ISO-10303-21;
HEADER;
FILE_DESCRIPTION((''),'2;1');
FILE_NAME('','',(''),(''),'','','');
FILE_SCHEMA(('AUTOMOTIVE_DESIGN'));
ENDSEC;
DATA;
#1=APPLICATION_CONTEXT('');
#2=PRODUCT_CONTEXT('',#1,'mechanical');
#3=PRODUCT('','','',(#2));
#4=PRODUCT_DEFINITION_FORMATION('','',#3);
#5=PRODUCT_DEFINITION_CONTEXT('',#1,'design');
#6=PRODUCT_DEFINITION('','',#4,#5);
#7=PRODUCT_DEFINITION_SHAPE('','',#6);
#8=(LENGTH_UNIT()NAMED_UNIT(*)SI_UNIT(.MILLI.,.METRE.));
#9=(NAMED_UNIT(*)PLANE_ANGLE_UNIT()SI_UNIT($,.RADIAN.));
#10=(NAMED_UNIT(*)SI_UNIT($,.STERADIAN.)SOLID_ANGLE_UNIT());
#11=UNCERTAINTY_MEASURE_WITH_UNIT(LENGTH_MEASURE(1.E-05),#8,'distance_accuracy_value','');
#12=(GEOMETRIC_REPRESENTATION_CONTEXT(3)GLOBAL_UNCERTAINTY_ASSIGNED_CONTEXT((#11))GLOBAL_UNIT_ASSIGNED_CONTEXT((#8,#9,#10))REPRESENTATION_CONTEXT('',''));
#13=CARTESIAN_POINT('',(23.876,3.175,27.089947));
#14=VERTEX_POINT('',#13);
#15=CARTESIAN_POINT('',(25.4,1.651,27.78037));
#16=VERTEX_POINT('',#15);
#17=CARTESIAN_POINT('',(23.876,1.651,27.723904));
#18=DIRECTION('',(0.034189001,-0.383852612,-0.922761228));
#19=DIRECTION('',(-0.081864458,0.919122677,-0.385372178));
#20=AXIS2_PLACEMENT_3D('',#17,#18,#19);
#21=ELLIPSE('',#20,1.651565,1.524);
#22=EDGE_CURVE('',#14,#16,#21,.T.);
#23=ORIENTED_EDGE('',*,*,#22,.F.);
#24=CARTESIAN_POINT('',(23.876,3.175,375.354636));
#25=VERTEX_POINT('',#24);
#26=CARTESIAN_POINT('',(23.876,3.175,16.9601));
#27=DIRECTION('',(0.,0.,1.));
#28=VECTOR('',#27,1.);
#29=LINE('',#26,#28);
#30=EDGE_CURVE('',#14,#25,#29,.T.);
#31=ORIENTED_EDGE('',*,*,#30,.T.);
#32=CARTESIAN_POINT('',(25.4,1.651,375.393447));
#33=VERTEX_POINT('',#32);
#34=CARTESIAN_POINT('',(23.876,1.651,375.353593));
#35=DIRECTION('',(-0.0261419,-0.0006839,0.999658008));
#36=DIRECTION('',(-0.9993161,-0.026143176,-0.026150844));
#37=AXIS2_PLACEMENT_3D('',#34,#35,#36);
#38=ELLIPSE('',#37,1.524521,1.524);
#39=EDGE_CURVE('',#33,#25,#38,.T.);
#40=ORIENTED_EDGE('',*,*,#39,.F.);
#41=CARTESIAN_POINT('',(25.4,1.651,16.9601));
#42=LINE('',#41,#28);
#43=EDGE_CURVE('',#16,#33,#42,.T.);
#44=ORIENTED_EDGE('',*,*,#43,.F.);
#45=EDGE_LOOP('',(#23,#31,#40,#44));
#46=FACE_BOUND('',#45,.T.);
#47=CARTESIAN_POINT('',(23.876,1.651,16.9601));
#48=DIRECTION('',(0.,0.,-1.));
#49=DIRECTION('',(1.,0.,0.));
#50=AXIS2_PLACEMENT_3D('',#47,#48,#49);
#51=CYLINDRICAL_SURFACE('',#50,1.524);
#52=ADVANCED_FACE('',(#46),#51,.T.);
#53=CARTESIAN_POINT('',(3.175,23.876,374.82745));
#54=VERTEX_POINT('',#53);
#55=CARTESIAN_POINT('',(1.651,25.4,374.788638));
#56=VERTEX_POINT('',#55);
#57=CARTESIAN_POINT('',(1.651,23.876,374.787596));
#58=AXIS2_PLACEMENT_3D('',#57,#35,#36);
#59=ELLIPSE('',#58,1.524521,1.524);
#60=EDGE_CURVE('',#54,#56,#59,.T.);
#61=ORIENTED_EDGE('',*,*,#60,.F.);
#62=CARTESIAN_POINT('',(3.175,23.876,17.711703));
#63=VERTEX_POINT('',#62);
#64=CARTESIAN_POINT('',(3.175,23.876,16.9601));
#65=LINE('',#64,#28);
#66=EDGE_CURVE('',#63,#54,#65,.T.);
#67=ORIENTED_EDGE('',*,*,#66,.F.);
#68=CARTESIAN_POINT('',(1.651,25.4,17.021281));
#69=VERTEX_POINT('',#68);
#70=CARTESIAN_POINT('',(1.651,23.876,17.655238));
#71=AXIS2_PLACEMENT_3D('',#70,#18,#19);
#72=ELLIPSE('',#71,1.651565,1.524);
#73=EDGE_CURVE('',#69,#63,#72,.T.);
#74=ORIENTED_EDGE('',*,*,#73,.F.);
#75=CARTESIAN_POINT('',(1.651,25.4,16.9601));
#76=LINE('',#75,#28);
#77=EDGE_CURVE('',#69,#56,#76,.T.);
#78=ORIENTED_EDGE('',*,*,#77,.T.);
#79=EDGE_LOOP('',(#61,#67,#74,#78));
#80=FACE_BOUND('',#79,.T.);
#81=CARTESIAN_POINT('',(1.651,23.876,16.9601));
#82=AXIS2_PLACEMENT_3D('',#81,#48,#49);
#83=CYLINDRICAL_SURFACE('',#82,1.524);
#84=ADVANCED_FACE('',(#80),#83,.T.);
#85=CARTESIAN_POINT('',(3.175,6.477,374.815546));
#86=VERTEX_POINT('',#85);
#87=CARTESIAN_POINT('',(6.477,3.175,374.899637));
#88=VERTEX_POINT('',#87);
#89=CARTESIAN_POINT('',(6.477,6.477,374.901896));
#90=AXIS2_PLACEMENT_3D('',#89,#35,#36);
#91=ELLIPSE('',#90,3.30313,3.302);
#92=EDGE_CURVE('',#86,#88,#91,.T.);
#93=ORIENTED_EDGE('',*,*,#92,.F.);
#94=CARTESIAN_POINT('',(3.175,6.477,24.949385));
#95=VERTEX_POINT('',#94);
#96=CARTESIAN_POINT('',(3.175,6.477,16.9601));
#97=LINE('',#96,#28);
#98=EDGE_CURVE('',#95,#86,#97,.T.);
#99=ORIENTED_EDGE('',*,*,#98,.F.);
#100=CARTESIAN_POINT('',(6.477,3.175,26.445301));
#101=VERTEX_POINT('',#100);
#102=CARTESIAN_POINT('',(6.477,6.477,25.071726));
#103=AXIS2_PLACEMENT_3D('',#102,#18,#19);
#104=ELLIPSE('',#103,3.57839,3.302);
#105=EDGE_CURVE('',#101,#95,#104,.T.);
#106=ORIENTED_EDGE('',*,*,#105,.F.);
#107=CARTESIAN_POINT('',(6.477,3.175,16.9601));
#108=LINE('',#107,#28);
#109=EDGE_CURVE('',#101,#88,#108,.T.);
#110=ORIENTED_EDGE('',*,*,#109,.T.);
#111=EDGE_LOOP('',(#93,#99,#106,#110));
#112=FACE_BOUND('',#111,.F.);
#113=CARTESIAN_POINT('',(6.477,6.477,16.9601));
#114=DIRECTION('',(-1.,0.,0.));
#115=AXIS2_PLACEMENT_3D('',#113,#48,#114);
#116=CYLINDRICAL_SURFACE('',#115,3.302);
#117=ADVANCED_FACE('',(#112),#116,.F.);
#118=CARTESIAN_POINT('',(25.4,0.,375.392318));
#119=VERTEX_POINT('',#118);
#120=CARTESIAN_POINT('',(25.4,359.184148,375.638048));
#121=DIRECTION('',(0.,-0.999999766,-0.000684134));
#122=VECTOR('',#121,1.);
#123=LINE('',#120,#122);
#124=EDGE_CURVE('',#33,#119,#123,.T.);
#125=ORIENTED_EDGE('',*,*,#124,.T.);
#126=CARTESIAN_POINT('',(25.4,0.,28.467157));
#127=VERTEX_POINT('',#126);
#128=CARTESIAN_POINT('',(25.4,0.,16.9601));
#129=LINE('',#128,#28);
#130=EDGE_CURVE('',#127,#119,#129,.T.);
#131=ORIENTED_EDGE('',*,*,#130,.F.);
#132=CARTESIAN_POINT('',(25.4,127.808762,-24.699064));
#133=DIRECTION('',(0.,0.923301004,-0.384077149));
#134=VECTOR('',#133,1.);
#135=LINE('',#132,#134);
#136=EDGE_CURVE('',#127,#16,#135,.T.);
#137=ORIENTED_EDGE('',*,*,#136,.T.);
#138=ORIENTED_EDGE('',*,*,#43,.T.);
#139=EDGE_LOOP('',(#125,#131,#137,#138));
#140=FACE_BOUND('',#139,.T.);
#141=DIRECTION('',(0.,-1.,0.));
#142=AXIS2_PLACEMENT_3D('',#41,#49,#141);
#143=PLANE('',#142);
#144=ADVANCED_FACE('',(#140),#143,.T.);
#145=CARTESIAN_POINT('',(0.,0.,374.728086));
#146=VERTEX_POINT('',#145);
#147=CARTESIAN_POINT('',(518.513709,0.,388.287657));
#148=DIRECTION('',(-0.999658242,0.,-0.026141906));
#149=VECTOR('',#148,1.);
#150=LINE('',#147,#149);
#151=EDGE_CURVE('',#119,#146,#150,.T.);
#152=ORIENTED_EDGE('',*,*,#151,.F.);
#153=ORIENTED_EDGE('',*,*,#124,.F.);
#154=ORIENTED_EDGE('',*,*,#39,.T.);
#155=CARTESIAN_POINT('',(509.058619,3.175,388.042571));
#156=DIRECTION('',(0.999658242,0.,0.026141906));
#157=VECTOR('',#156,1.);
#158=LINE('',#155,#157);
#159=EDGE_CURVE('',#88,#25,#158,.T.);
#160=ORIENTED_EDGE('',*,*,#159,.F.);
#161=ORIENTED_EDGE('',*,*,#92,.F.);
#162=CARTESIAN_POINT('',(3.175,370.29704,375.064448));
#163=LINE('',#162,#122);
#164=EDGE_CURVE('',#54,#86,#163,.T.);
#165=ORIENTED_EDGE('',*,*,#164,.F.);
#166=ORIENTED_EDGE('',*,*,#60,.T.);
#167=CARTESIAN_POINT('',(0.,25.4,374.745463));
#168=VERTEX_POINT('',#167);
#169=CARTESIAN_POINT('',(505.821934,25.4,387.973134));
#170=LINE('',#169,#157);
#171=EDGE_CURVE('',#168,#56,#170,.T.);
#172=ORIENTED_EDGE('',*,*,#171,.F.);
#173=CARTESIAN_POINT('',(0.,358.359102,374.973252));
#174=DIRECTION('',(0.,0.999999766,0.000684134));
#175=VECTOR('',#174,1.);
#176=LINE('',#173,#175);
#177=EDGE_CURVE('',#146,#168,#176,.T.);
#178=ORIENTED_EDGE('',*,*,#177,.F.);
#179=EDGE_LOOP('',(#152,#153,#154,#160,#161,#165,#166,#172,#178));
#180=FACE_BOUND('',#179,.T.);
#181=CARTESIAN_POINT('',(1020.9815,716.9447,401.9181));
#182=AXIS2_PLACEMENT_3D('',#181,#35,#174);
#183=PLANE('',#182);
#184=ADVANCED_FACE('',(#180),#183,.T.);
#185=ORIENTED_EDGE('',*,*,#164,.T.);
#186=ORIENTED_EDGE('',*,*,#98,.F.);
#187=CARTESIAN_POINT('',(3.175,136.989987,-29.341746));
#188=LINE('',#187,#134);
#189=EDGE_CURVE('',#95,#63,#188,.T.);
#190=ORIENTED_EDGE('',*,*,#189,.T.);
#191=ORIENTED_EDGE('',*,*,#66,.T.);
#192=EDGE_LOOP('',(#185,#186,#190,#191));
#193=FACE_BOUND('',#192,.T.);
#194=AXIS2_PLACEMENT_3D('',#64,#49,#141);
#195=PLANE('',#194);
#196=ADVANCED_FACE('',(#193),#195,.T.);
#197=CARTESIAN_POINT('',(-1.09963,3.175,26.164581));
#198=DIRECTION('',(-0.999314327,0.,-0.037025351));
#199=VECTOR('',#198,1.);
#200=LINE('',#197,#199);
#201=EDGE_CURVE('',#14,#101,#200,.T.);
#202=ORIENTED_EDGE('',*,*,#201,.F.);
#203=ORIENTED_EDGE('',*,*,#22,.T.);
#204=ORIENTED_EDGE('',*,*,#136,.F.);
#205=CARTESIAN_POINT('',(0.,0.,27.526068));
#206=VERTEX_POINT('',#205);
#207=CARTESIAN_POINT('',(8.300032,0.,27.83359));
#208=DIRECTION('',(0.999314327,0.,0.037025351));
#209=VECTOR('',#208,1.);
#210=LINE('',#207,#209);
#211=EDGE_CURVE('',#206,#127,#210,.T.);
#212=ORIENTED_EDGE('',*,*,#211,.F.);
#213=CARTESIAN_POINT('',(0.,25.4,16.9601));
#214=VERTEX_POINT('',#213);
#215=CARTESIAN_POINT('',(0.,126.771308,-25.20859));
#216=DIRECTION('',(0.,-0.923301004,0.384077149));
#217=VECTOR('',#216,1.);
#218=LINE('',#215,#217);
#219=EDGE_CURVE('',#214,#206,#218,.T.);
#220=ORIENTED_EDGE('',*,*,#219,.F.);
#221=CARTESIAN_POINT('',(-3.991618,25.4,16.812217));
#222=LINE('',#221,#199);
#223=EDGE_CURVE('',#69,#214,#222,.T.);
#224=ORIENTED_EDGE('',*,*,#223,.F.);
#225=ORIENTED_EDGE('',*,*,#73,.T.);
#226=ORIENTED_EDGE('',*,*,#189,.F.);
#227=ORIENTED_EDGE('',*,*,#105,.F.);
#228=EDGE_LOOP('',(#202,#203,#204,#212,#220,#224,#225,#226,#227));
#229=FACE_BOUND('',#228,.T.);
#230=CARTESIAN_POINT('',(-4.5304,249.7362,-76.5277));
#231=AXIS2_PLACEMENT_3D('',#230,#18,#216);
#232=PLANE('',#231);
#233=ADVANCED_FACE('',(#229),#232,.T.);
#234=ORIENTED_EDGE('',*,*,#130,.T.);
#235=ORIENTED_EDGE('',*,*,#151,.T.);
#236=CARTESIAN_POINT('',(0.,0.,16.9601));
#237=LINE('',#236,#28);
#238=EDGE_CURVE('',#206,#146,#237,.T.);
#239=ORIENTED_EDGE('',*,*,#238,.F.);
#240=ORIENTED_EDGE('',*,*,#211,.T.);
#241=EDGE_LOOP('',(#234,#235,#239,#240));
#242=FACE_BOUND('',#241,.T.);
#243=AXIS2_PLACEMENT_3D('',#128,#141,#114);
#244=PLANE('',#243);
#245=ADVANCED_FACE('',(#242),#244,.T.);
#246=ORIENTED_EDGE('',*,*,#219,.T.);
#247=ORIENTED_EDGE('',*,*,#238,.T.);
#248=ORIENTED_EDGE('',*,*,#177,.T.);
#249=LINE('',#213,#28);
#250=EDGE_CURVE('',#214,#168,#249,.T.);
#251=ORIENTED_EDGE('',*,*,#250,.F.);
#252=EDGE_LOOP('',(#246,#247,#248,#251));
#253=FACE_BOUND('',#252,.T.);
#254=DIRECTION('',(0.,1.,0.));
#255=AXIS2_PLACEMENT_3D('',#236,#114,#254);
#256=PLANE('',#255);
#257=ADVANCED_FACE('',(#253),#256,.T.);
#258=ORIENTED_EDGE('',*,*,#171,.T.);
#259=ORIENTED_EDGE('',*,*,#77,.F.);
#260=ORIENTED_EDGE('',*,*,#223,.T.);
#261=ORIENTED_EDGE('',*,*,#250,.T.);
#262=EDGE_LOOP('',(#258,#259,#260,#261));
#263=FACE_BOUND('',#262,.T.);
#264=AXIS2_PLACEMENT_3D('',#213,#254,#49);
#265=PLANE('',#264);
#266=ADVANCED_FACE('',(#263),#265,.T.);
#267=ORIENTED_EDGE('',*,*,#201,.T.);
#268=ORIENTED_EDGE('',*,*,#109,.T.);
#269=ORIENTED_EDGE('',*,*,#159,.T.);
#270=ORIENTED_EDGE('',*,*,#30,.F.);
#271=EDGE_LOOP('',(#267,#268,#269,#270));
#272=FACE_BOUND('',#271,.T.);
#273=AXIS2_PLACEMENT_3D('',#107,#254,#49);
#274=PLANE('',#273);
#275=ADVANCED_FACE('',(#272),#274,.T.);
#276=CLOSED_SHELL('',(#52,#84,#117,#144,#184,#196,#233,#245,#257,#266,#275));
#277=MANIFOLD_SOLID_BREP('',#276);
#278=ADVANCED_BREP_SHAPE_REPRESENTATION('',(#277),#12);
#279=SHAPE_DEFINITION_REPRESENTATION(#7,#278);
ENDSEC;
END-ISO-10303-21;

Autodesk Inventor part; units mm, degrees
ref_plane "Start Plane" through (0, 0, 16.9601) normal (0, 0, 1) x (1, 0, 0)
ref_plane "End Plane" through (0, 0, 375.4098) normal (0, 0, 1) x (1, 0, 0)
sketch "Sketch" plane through (0, 0, 0) normal (0, 0, 1) x (1, 0, 0)
  line L0 (25.4, 0) -> (0, 0)
  line L1 (0, 0) -> (0, 25.4)
  line L2 (0, 25.4) -> (1.651, 25.4)
  line L3 (3.175, 23.876) -> (3.175, 6.477)
  line L4 (6.477, 3.175) -> (23.876, 3.175)
  line L5 (25.4, 1.651) -> (25.4, 0)
  line L6 (0, -11.0414) -> (0, 31.5385) construction
  line L7 (-11.0414, 0) -> (31.5385, 0) construction
  arc A0 (3.175, 6.477) -> (6.477, 3.175) centre (6.477, 6.477) ccw
  arc A1 (3.175, 23.876) -> (1.651, 25.4) centre (1.651, 23.876) ccw
  arc A2 (25.4, 1.651) -> (23.876, 3.175) centre (23.876, 1.651) ccw
  line L8 (0, 40.0545) -> (0, -19.5574) construction
  line L9 (-19.5574, 0) -> (40.0545, 0) construction
  point P0 (3.175, 25.4)
  point P1 (3.175, 3.175)
  point P2 (25.4, 3.175)
  dimension "d0" = 25.4
  dimension "d1" = 25.4
  dimension "d2" = 3.175
  dimension "d3" = 3.175
  dimension "d10" = 0
  dimension "d11" = 0
  dimension "d14" = 3.302
  dimension "d15" = 1.524
extrude "Body" add sketch "Sketch" along normal up to surface (358.4496 mm away) from surface at 16.9601
sketch "Sketch3" plane through (0, 0, 0) normal (0, 0, 1) x (1, 0, 0)
  line L0 (0, 0) -> (10, 0)
ref_plane "Work Plane3" through (0, 0, 0) normal (0, -1, 0) x (1, 0, 0)
ref_plane "Work Plane5" through (1020.9815, 716.9447, 401.9181) normal (-0.0261419, -0.0006839, 0.999658) x (0.9996582, -0.0000089, 0.0261419)
split "Split2" plane through (1020.9815, 716.9447, 401.9181) removes the side toward (-0.0261419, -0.0006839, 0.999658)
ref_plane "Work Plane6" through (-4.5304, 249.7362, -76.5277) normal (0.034189, -0.3838526, -0.9227612) x (0.9848666, 0.1699087, -0.034189)
split "Split3" plane through (-4.5304, 249.7362, -76.5277) removes the side toward (0.034189, -0.3838526, -0.9227612)
sketch "Sketch4" plane through (0, 0, 0) normal (0, -1, 0) x (1, 0, 0)
  line L0 (-2, 16.9601) -> (12, 16.9601) projected
  line L1 (-2, 375.4098) -> (12, 375.4098) projected
  dimension "d17" = 358.4496
equation "\"d0\" = G_H"
equation "\"d1\" = G_H"
equation "\"d2\" = G_T"
equation "\"d3\" = G_T"
equation "\"d14\" = G_IR"
equation "\"d15\" = G_ER"
equation "\"d4\" = G_L"
equation "\"G_H\" = 25.4"
equation "\"G_T\" = 3.175"
equation "\"G_ER\" = 1.524"
equation "\"G_IR\" = 3.302"
equation "\"G_L\" = 358.43341"
equation "\"ex\" = 0"
equation "\"G_OFFSET_START\" = -16.96012"
equation "\"G_OFFSET_END\" = -24.72708"
equation "\"d12\" = -G_OFFSET_START"
equation "\"d13\" = G_OFFSET_END + B_L"
equation "\"B_L\" = 400.13684"
properties part number "AISC - L 1 x 1 x 1/8 - 14.112" material "Steel, Mild"
